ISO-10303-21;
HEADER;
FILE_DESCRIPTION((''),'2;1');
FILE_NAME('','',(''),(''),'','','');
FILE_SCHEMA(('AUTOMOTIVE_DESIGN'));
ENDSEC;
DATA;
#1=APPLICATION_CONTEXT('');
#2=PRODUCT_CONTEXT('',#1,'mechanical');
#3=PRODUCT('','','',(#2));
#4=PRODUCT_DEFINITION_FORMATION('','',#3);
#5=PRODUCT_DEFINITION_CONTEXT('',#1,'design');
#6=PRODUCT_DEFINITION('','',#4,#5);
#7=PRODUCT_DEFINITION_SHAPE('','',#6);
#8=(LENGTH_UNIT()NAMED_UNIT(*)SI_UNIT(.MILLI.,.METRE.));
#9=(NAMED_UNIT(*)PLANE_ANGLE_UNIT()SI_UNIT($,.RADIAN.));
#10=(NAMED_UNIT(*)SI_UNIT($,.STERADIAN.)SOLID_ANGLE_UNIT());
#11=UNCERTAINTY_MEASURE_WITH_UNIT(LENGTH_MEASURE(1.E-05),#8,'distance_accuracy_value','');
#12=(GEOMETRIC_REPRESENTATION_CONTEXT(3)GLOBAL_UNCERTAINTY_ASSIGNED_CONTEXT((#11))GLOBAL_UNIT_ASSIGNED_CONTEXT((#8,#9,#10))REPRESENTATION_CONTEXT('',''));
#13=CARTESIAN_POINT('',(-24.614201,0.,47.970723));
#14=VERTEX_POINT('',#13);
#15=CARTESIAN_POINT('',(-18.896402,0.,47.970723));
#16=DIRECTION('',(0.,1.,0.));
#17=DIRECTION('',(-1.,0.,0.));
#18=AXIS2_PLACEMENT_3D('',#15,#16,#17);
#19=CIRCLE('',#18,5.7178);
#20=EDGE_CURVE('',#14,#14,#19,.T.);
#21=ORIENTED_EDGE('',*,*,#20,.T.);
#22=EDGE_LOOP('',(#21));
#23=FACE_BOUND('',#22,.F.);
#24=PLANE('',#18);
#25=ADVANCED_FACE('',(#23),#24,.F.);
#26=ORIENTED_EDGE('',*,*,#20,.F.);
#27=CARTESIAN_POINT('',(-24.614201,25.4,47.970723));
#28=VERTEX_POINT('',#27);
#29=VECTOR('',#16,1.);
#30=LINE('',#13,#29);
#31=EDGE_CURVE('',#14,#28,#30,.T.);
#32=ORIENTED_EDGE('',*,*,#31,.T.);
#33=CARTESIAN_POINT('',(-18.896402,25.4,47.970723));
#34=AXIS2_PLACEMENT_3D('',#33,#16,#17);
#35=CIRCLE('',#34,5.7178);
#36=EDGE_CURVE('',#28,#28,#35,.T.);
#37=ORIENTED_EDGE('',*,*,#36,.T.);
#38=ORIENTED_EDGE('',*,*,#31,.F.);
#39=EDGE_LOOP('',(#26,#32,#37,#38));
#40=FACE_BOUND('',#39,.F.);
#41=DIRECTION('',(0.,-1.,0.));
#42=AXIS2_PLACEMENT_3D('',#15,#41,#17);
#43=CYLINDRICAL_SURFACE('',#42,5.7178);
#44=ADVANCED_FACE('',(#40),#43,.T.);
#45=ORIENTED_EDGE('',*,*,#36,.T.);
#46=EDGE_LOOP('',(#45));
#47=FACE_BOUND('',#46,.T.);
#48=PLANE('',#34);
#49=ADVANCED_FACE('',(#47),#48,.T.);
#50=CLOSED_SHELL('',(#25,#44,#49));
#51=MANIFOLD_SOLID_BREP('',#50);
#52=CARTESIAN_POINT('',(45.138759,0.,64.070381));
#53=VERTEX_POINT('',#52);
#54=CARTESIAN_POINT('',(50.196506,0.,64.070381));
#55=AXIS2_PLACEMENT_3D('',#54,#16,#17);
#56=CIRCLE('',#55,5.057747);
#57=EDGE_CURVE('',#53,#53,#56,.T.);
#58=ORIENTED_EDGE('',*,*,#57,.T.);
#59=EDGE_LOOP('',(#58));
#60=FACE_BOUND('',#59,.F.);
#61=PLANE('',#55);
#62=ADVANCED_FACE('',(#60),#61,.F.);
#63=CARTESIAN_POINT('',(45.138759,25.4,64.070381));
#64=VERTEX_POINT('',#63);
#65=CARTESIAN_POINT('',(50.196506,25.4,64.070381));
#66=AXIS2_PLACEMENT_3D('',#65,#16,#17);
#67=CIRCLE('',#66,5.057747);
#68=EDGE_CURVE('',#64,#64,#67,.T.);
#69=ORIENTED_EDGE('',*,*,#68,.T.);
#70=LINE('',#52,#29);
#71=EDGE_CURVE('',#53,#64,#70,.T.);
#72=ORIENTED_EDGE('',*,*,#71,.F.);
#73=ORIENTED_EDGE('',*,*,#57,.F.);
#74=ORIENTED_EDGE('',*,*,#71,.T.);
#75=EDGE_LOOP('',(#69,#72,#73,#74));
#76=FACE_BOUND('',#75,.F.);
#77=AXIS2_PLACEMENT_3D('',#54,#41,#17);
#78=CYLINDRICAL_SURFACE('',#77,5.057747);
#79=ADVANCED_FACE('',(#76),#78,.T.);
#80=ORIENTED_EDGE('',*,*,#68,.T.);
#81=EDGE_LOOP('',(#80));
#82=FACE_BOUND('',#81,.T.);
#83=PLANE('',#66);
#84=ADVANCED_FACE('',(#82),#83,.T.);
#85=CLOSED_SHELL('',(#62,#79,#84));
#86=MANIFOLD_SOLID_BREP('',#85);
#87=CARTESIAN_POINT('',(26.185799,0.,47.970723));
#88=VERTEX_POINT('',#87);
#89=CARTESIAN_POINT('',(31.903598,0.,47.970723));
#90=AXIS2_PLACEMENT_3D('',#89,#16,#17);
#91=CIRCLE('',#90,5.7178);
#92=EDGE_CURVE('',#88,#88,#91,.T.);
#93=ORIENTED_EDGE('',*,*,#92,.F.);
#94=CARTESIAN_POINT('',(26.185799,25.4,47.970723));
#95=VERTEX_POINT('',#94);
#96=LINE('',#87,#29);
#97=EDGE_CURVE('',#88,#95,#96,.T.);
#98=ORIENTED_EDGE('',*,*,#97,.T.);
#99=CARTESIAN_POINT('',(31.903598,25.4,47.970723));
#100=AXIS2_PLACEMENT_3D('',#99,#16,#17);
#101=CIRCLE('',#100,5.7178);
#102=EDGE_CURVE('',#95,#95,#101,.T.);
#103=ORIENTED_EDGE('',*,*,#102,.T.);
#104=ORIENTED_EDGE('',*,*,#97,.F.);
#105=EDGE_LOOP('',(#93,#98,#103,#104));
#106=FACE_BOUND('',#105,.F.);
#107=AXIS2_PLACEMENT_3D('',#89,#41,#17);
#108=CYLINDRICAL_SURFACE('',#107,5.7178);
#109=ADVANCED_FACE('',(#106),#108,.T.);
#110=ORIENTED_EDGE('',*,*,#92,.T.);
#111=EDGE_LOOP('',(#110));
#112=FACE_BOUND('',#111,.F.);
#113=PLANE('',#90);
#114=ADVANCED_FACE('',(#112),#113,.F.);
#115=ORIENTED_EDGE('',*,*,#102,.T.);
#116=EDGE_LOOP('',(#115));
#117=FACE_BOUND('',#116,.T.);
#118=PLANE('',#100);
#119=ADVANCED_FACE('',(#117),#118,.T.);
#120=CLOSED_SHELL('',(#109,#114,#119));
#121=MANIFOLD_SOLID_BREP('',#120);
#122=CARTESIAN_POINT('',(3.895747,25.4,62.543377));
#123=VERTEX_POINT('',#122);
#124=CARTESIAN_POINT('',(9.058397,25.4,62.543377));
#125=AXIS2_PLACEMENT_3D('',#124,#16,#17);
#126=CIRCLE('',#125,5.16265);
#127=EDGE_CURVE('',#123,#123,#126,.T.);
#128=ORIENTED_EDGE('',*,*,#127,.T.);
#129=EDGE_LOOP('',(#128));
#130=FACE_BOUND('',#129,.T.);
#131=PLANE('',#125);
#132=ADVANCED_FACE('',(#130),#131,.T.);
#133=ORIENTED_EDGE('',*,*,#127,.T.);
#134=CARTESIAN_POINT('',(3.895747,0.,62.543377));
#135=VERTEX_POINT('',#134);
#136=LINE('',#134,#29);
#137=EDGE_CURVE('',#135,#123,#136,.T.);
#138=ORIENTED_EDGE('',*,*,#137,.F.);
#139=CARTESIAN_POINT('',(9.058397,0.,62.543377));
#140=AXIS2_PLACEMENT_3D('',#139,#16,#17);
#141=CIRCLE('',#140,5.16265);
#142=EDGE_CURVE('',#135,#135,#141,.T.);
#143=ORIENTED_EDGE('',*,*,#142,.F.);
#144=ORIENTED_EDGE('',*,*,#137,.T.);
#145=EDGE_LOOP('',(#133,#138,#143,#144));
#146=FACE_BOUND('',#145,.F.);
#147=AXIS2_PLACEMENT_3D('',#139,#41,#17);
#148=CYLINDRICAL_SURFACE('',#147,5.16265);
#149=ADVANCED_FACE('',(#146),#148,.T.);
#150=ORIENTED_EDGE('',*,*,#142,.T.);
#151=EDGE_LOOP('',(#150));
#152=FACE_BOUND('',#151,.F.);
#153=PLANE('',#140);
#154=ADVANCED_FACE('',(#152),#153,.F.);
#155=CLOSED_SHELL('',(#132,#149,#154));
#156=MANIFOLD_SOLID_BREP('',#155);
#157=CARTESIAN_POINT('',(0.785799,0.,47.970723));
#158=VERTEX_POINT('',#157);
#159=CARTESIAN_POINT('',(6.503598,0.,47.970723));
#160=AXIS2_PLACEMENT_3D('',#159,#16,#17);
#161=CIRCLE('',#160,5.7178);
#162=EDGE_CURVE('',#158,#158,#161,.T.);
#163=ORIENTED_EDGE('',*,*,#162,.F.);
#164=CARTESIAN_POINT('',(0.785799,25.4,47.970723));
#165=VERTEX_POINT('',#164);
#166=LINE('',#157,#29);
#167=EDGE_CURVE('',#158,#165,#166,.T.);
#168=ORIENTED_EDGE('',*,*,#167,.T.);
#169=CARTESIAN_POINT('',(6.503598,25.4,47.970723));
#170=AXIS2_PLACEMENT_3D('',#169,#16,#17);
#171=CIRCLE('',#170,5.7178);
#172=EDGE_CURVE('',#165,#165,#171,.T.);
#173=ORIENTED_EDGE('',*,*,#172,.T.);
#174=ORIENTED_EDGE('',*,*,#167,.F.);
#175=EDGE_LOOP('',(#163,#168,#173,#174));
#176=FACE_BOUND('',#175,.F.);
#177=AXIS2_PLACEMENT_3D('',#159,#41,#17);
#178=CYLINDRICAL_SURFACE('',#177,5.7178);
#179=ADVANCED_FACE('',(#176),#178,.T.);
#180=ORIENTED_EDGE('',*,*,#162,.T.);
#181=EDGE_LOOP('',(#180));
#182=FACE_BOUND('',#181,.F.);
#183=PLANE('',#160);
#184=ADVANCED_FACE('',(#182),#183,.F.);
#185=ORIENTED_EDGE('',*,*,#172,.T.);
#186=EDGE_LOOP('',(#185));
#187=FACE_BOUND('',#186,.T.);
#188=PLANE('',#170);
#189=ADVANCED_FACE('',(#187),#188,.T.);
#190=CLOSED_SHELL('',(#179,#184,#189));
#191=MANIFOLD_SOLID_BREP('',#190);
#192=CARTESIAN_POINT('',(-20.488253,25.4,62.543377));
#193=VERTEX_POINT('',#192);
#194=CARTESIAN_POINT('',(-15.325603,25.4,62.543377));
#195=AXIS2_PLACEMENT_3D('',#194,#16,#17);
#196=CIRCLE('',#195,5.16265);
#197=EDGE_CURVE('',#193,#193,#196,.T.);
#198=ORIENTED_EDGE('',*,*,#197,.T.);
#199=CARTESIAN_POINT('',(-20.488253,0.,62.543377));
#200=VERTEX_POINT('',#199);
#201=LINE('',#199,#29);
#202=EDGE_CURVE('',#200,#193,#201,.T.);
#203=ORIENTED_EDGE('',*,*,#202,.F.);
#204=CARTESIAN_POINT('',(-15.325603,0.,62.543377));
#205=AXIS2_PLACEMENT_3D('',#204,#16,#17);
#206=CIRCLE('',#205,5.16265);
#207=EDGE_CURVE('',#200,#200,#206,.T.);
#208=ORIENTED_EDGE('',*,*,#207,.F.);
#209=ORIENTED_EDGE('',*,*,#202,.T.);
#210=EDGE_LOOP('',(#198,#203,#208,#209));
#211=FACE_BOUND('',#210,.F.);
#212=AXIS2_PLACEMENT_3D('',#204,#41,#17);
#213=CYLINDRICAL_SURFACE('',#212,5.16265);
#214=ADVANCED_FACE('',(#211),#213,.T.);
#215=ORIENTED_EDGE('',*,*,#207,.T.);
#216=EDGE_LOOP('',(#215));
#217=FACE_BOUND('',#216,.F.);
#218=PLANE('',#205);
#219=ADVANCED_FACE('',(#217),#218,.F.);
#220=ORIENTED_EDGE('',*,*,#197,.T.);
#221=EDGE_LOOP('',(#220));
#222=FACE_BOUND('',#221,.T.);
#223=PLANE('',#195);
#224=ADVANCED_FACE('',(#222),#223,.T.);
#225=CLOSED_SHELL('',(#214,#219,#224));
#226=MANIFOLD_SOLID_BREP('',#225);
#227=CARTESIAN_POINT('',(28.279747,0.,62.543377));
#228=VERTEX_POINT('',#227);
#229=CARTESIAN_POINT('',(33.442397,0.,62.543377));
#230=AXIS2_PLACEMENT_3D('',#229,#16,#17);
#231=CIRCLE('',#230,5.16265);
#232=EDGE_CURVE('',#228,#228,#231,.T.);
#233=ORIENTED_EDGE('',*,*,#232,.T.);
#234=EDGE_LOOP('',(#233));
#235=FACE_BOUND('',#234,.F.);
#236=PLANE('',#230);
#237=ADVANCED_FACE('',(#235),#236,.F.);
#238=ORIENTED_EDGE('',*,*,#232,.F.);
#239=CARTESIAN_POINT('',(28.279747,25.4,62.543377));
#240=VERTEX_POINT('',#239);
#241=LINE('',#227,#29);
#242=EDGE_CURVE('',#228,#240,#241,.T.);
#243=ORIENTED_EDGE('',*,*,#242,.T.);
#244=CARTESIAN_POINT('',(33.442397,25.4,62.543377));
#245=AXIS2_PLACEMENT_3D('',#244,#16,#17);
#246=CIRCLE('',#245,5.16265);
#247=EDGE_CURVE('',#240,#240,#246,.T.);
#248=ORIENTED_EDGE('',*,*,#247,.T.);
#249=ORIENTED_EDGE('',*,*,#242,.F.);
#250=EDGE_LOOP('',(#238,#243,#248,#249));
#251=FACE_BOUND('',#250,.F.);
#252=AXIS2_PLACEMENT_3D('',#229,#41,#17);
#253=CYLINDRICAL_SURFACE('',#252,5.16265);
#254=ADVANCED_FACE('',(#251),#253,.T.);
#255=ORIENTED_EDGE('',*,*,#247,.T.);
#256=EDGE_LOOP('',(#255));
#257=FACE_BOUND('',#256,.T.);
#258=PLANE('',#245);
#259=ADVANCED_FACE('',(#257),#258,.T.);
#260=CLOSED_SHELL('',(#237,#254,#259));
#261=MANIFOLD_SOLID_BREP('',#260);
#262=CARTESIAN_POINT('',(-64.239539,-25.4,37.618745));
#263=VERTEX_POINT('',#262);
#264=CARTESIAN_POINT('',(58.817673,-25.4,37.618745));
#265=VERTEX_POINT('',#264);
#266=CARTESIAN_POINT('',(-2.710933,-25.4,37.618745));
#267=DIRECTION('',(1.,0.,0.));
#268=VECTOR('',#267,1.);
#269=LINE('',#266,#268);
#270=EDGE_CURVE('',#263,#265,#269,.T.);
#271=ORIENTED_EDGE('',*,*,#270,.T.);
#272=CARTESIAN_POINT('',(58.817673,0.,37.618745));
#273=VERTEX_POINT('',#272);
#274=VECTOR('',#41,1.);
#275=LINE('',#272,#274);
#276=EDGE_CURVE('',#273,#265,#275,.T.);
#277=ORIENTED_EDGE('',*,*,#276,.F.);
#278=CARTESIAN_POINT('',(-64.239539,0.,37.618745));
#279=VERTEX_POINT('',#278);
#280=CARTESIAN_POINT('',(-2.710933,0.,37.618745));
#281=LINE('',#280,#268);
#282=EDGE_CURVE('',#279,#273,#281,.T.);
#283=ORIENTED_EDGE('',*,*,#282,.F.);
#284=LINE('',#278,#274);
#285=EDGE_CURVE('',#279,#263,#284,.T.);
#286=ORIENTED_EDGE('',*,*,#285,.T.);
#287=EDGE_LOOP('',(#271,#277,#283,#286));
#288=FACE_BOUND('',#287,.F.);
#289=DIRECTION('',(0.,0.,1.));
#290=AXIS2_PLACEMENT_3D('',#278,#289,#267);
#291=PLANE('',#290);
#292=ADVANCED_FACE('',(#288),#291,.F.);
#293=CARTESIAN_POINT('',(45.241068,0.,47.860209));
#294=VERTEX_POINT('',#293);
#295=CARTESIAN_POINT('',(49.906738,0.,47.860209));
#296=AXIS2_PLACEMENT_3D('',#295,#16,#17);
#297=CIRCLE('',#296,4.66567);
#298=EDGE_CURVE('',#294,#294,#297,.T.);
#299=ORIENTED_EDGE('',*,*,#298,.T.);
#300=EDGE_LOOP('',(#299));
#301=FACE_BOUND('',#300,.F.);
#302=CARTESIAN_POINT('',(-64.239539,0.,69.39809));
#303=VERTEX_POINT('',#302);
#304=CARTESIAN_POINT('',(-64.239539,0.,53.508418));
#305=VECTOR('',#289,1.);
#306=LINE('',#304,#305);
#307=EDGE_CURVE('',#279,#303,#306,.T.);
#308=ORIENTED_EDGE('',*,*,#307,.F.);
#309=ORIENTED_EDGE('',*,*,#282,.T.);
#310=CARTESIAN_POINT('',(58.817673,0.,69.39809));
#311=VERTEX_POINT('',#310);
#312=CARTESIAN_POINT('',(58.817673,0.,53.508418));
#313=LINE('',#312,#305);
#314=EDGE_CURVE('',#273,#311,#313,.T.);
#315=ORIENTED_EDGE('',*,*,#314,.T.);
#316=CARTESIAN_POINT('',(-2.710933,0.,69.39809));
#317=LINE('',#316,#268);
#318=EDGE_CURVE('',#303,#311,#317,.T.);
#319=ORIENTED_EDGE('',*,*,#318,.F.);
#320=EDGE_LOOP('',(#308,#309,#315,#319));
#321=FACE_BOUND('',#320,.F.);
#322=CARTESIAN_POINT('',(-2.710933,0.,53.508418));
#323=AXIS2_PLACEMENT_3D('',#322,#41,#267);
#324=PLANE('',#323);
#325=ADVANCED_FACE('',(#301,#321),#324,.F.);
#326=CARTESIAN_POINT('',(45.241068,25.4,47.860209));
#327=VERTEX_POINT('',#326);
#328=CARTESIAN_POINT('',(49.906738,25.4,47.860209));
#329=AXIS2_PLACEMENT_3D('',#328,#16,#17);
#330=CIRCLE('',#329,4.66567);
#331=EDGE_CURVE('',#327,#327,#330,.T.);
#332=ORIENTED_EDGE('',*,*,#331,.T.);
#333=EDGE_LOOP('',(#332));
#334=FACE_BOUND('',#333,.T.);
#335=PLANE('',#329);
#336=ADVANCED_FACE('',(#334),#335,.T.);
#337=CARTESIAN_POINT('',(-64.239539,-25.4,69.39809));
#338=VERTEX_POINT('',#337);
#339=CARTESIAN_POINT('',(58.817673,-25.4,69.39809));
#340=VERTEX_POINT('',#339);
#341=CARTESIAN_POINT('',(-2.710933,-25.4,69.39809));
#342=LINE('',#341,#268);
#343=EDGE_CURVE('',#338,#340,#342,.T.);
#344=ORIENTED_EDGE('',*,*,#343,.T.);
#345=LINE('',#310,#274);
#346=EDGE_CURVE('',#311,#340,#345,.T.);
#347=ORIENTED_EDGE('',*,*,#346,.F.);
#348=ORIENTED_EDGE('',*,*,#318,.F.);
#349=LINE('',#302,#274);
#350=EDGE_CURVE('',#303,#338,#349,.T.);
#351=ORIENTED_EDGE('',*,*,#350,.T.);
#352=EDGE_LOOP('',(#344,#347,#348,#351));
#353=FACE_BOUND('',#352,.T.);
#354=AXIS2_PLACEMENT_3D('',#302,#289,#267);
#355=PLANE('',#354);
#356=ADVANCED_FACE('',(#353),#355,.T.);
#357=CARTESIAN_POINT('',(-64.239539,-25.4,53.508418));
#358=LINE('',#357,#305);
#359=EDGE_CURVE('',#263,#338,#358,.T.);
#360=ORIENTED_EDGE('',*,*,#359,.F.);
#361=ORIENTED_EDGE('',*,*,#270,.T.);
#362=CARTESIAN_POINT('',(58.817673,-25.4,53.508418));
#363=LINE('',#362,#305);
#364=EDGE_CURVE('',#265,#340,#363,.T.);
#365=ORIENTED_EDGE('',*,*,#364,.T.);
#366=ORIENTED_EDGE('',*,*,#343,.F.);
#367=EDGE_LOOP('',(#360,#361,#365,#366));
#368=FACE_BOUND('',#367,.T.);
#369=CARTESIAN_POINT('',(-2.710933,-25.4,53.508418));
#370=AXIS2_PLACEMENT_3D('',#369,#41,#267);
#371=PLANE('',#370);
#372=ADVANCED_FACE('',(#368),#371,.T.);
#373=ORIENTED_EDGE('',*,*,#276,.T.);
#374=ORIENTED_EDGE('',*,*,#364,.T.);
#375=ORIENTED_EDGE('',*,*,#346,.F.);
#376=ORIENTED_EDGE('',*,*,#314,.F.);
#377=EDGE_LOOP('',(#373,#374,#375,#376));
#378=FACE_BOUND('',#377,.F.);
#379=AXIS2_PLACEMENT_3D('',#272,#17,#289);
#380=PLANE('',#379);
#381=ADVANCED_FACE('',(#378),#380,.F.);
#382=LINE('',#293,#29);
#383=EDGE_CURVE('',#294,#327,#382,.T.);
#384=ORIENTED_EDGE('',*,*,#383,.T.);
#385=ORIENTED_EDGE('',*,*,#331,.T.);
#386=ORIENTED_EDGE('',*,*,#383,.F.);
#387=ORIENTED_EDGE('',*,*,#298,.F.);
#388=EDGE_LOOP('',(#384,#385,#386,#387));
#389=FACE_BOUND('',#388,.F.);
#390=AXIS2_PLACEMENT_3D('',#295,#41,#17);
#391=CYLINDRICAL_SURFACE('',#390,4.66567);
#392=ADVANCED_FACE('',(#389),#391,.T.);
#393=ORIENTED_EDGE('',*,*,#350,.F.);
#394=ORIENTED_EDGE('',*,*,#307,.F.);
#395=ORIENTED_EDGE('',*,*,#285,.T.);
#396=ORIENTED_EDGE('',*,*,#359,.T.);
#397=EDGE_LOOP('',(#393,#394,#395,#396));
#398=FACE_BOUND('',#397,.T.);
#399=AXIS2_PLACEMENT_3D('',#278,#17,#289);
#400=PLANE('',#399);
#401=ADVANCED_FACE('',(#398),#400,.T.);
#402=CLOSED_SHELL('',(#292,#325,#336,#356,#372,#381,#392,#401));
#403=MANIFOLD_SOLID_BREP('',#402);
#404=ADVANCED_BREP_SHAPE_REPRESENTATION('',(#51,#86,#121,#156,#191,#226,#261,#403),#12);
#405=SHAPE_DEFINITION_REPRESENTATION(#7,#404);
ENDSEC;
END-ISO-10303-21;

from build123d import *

# Parameters (mm, degrees)
F0_W     = 123.0572126806
F0_H     = 31.779345125
F1_DEPTH = 25.4
F2_R     = 5.0577468646
F3_DEPTH = 25.4
F4_R     = 4.6656704546
F5_DEPTH = 25.4
F6_R     = 5.7177995667
F7_DEPTH = 25.4
F8_R     = 5.1626495497
F9_DEPTH = 25.4


# Not quite as in the source:
# - a feature names something its author has since deleted; it is built from what else it names


with BuildPart() as f1:
    # F0 (on Front) → F1 (new body)
    with BuildSketch(Plane.XZ):
        with Locations((-2.7109328657, 53.5084176809)):
            Rectangle(F0_W, F0_H)
    extrude(amount=F1_DEPTH)

    # F4 (on face) → F5 (join)
    with BuildSketch(Plane(origin=(0, 0, 0), x_dir=(-1, 0, 0), z_dir=(0, 1, 0))):
        with Locations((-49.9067381024, 47.8602088988)):
            Circle(F4_R)
    extrude(amount=F5_DEPTH)


with BuildPart() as f3:
    # F2 (on face) → F3 (new body)
    with BuildSketch(Plane(origin=(0, 0, 0), x_dir=(-1, 0, 0), z_dir=(0, 1, 0))):
        with Locations((-50.196506083, 64.0703812242)):
            Circle(F2_R)
    extrude(amount=F3_DEPTH)


with BuildPart() as f7:
    # F6 (on face) → F7 (new body)
    with BuildSketch(Plane(origin=(0, 0, 0), x_dir=(-1, 0, 0), z_dir=(0, 1, 0))):
        with Locations((-31.9035984576, 47.9707233608)):
            Circle(F6_R)
    extrude(amount=F7_DEPTH)


with BuildPart() as f7b:
    # F6 (on face) → F7, piece 2 (new body)
    with BuildSketch(Plane(origin=(0, 0, 0), x_dir=(-1, 0, 0), z_dir=(0, 1, 0))):
        with Locations((-6.5035984576, 47.9707233608)):
            Circle(F6_R)
    extrude(amount=F7_DEPTH)


with BuildPart() as f7c:
    # F6 (on face) → F7, piece 3 (new body)
    with BuildSketch(Plane(origin=(0, 0, 0), x_dir=(-1, 0, 0), z_dir=(0, 1, 0))):
        with Locations((18.8964015424, 47.9707233608)):
            Circle(F6_R)
    extrude(amount=F7_DEPTH)


with BuildPart() as f9:
    # F8 (on face) → F9 (new body)
    with BuildSketch(Plane(origin=(0, 0, 0), x_dir=(-1, 0, 0), z_dir=(0, 1, 0))):
        with Locations((-33.4423966706, 62.5433772802)):
            Circle(F8_R)
    extrude(amount=F9_DEPTH)


with BuildPart() as f9b:
    # F8 (on face) → F9, piece 2 (new body)
    with BuildSketch(Plane(origin=(0, 0, 0), x_dir=(-1, 0, 0), z_dir=(0, 1, 0))):
        with Locations((-9.0583966706, 62.5433772802)):
            Circle(F8_R)
    extrude(amount=F9_DEPTH)


with BuildPart() as f9c:
    # F8 (on face) → F9, piece 3 (new body)
    with BuildSketch(Plane(origin=(0, 0, 0), x_dir=(-1, 0, 0), z_dir=(0, 1, 0))):
        with Locations((15.3256033294, 62.5433772802)):
            Circle(F8_R)
    extrude(amount=F9_DEPTH)


solid = Compound([f1.part, f3.part, f7.part, f7b.part, f7c.part, f9.part, f9b.part, f9c.part])
